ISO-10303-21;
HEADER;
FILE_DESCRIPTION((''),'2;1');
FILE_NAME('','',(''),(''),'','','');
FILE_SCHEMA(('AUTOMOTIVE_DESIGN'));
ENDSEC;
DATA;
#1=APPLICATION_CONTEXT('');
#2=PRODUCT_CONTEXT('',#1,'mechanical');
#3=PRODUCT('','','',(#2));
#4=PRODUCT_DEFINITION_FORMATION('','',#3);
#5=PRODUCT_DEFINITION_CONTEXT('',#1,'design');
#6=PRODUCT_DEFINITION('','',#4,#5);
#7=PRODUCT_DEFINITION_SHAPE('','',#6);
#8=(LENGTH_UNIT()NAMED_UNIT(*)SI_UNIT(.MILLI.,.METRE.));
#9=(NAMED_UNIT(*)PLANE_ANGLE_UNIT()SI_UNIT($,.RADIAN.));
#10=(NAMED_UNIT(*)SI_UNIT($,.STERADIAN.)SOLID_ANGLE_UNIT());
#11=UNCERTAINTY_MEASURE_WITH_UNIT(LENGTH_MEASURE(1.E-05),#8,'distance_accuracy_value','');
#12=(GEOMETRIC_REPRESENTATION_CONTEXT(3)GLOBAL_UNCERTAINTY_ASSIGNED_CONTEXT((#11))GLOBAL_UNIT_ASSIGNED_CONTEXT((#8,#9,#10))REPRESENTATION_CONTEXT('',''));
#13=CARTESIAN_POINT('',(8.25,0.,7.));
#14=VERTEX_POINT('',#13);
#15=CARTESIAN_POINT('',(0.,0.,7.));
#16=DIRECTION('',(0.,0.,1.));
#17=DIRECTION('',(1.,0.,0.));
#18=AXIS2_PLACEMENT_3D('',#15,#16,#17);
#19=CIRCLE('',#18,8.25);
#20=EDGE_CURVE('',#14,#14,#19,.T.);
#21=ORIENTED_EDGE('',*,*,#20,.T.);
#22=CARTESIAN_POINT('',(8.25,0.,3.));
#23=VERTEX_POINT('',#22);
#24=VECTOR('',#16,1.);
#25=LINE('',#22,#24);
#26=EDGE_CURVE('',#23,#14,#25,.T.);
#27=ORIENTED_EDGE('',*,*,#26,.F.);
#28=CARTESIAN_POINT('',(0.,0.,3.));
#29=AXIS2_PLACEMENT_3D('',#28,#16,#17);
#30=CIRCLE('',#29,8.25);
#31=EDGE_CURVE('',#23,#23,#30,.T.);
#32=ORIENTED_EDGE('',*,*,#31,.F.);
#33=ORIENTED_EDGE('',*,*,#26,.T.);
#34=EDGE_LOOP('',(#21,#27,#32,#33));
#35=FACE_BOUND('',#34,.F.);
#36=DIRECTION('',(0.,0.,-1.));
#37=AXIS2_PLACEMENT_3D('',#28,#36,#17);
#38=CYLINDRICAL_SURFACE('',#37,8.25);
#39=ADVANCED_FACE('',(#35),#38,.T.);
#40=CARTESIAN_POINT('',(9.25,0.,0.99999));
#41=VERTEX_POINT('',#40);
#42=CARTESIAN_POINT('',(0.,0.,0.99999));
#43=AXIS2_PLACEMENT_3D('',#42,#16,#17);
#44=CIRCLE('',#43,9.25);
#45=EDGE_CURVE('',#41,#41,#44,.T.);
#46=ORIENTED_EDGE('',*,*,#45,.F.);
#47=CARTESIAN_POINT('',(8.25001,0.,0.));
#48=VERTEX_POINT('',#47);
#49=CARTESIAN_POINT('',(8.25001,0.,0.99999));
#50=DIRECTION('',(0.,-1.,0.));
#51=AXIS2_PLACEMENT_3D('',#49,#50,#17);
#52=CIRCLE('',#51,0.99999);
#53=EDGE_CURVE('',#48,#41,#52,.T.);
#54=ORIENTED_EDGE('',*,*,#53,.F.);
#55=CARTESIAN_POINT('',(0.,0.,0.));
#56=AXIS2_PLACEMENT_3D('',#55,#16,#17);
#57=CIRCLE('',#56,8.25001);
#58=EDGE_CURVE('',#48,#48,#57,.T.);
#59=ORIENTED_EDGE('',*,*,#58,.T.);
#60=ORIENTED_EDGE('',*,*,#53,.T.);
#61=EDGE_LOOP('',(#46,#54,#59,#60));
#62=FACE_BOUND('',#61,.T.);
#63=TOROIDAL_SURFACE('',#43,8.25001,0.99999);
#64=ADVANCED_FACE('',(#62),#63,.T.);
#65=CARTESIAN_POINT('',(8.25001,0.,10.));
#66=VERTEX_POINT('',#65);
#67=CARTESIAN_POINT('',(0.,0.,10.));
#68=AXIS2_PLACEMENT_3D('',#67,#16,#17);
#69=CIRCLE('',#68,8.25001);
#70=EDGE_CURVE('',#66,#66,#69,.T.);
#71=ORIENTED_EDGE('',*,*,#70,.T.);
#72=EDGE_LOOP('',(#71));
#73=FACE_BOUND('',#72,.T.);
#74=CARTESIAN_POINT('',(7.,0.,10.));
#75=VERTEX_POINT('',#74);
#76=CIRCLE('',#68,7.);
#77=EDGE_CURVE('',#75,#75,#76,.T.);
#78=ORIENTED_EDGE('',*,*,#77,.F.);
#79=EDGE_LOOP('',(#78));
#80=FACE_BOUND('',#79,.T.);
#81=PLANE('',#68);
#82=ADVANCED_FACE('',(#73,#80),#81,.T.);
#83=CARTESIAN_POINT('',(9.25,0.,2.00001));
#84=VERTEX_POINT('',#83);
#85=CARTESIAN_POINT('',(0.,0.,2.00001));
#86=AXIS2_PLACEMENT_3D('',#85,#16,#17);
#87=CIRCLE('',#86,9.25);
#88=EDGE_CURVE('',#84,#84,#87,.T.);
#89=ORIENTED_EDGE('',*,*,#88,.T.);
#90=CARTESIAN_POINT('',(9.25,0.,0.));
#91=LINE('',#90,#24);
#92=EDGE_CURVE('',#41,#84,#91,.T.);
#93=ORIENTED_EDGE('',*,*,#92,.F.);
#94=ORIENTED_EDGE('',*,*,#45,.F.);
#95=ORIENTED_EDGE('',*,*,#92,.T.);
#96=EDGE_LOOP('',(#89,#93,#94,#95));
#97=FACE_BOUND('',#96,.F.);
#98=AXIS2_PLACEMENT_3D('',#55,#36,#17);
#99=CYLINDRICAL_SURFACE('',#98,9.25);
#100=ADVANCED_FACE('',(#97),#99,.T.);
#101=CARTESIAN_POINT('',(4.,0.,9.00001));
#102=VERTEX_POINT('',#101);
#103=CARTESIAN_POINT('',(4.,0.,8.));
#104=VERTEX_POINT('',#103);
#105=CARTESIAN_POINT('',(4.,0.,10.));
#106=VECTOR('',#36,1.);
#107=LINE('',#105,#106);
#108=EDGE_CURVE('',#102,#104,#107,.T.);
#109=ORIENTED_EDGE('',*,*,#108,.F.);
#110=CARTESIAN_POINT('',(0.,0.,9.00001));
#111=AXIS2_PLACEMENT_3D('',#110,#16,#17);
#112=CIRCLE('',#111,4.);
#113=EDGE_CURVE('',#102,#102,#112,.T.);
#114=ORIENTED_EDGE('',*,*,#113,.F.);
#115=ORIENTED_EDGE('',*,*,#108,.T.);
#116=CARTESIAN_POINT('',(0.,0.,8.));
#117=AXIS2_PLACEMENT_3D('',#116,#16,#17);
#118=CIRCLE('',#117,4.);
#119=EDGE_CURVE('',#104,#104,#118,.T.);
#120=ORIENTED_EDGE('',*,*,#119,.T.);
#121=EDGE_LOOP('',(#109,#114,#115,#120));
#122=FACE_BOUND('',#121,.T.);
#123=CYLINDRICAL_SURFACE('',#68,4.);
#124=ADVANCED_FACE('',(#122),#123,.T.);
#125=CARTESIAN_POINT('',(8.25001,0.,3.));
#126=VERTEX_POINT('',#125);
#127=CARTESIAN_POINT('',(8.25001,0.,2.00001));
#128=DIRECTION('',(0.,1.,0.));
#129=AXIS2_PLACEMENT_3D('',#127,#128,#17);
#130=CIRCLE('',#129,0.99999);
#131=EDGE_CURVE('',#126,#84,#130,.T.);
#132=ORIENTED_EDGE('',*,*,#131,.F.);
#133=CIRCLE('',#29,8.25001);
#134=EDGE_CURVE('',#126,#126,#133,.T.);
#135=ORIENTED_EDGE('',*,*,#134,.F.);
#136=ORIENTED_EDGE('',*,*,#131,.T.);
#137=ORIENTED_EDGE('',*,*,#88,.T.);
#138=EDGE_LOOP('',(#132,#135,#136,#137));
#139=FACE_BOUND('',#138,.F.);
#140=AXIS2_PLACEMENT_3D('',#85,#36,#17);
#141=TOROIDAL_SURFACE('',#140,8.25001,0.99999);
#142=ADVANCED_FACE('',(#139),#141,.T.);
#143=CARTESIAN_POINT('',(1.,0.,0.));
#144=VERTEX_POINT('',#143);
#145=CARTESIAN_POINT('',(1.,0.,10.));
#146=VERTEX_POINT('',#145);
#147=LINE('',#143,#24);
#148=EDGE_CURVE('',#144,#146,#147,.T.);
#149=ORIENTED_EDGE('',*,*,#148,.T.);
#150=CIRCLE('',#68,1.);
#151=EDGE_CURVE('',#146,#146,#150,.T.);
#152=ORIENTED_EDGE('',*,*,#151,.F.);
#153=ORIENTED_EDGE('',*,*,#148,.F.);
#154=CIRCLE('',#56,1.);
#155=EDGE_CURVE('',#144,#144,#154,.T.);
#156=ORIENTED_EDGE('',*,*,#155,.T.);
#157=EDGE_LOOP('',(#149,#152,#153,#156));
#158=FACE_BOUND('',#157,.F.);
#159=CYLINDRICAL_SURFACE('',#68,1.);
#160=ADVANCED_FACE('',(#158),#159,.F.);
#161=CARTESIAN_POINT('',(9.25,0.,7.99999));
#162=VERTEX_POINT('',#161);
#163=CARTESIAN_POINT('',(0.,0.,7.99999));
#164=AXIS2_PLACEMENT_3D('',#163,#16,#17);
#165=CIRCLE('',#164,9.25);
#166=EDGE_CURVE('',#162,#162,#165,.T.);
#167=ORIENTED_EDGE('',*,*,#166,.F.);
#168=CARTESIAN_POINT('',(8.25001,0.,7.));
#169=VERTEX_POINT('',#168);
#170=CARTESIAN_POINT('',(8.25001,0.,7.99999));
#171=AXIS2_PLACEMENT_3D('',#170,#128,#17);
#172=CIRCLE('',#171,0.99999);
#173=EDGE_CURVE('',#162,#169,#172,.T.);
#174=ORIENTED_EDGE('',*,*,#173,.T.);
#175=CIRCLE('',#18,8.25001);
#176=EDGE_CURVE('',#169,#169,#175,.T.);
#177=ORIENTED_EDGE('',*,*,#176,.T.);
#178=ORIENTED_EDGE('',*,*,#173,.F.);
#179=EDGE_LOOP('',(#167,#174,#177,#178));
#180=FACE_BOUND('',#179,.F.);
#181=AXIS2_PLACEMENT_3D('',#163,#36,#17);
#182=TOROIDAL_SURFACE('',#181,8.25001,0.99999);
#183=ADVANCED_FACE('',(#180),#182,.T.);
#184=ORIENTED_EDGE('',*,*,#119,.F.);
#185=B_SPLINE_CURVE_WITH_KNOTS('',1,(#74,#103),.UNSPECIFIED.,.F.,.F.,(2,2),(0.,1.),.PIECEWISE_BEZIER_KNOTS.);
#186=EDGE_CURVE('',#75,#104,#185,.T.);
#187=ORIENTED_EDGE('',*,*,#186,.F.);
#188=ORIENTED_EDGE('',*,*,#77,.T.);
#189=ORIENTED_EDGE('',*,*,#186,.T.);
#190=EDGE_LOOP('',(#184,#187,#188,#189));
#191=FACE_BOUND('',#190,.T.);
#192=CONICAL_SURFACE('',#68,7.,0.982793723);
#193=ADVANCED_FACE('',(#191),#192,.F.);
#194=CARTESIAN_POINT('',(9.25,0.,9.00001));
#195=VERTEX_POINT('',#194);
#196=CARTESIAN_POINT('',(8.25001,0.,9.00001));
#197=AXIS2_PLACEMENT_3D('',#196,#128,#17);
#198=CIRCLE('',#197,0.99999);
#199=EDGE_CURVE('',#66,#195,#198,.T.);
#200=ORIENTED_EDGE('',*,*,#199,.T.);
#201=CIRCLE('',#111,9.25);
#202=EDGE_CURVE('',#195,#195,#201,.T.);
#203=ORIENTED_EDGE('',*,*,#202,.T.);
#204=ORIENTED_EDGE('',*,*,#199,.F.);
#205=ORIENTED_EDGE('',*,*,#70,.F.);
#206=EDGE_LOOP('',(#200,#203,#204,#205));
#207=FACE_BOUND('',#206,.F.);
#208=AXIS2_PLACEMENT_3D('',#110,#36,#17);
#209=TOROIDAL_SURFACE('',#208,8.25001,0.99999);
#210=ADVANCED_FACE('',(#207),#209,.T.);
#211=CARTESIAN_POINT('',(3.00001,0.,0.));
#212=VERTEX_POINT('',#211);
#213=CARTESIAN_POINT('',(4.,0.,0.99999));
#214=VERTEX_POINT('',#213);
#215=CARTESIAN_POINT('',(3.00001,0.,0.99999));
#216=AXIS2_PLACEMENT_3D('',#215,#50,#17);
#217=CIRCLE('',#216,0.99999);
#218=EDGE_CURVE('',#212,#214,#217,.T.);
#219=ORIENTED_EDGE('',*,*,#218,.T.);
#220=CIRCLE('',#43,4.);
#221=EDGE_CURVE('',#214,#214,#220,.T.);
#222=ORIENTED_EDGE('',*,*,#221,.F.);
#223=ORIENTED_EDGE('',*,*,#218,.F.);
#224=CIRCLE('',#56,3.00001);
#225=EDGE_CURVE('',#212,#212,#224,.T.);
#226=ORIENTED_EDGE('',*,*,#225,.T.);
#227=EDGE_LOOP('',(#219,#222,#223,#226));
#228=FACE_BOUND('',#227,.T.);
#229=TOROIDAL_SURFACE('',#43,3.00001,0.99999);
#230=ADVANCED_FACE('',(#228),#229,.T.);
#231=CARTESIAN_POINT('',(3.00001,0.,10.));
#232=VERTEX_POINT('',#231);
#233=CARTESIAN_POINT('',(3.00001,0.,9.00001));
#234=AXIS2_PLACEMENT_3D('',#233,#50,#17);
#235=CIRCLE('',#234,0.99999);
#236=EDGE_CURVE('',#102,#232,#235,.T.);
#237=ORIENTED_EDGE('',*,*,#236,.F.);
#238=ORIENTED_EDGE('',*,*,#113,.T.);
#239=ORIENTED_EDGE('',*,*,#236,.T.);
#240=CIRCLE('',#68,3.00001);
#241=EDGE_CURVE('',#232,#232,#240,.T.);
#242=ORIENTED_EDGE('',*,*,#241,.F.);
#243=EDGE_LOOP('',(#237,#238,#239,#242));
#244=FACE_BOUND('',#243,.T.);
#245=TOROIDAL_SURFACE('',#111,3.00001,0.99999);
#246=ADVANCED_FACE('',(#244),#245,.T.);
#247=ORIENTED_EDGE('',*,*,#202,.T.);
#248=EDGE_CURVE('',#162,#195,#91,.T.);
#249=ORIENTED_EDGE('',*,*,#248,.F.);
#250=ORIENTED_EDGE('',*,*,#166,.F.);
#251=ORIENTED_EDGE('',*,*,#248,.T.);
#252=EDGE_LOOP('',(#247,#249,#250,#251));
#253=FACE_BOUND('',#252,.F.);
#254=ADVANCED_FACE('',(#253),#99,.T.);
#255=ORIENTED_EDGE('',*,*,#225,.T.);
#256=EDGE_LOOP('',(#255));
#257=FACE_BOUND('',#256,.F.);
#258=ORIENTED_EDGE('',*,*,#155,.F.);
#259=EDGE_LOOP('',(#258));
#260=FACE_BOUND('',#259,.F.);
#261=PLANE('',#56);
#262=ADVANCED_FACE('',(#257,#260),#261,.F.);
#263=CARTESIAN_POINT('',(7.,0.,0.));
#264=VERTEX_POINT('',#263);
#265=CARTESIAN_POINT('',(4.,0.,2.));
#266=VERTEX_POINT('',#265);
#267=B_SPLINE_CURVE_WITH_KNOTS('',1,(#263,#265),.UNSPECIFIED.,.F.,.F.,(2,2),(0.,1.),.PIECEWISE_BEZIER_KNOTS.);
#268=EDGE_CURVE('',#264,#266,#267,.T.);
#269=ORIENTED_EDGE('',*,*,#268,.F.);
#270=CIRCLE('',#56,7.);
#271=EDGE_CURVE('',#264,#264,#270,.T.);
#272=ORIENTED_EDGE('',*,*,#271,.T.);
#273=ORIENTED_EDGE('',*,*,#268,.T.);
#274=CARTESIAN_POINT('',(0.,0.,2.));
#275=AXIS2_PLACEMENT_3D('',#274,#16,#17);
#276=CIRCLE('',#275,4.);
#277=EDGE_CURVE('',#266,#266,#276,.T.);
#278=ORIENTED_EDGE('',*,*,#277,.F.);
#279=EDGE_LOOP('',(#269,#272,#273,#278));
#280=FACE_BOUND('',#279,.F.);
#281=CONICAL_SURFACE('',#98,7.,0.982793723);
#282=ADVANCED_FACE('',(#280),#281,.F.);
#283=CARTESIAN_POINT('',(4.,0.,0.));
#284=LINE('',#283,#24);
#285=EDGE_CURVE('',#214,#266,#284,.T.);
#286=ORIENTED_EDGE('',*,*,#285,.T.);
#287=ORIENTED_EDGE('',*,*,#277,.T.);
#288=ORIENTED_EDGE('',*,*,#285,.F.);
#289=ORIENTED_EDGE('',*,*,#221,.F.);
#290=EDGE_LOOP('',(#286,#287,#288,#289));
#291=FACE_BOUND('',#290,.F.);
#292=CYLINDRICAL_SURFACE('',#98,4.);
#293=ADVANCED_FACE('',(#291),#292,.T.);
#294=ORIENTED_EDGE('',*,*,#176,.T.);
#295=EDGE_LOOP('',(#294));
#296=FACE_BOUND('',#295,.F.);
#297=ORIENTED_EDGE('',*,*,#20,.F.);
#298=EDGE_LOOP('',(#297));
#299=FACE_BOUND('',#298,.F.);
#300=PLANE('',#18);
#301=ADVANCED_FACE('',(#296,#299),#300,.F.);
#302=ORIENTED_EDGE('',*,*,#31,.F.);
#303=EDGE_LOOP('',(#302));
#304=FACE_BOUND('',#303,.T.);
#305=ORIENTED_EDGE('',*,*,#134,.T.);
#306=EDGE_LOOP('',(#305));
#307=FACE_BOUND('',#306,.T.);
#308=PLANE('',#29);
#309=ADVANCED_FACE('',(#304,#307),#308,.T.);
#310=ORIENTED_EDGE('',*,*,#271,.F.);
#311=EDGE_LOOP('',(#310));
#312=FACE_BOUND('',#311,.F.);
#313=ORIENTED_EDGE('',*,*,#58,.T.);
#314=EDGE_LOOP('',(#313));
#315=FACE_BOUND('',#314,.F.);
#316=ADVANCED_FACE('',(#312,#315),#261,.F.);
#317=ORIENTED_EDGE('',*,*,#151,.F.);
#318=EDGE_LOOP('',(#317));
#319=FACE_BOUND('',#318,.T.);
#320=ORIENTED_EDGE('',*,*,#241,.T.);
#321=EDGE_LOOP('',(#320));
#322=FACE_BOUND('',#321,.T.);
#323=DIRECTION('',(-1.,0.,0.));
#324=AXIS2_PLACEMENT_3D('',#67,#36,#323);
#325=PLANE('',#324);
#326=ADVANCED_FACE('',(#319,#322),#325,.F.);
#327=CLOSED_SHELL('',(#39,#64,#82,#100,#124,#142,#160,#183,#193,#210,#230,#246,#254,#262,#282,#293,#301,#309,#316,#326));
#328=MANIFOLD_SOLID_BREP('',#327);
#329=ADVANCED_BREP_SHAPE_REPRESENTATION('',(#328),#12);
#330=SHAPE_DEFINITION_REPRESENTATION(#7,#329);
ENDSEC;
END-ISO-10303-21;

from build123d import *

# Parameters (mm, degrees)
F0_R      = 9.25
F0_R_2    = 1
F1_DEPTH  = 10
F4_R      = 7
F3_R      = 4
F8_R      = 7
F7_R      = 4
F11_R     = 4
F11_R_2   = 1
F12_DEPTH = 2
F14_R     = 9.25
F14_R_2   = 8.25
F15_DEPTH = 4
F16_R     = 0.99999


# Not quite as in the source:
# - a fillet or chamfer is up to 0.001 mm smaller than in the source, because OpenCascade refuses the exact size
# - a feature of the source that left no trace in its solid (it failed there, or was rolled back) is left out
# - a pattern or mirror of a feature is missing from the dataset's text; its kind, count and spacing are read off the source's solid


with BuildPart() as f1:
    # F0 (on Top) → F1 (new body)
    with BuildSketch(Plane.XY):
        Circle(F0_R)
        Circle(F0_R_2, mode=Mode.SUBTRACT)
    extrude(amount=F1_DEPTH)

    # F4 (on face) → F5 section 0
    with BuildSketch(Plane.XY.offset(10)):
        Circle(F4_R)
    # F3 (on offset) → F5 section 1
    with BuildSketch(Plane.XY.offset(8)):
        Circle(F3_R)
    loft(mode=Mode.SUBTRACT)

    # F8 (on face) → F9 section 0
    with BuildSketch(Plane.XY):
        Circle(F8_R)
    # F7 (on offset) → F9 section 1
    with BuildSketch(Plane.XY.offset(2)):
        Circle(F7_R)
    loft(mode=Mode.SUBTRACT)

    # F11 (on face) → F12 (join, through all)
    with BuildSketch(Plane.XY):
        Circle(F11_R)
        Circle(F11_R_2, mode=Mode.SUBTRACT)
    f12 = extrude(amount=F12_DEPTH)

    # F12_copies: F12 across plane
    add(f12.mirror(Plane.XY.offset(5)))

    # F14 (on offset) → F15 (cut)
    with BuildSketch(Plane.XY.offset(3)):
        Circle(F14_R)
        Circle(F14_R_2, mode=Mode.SUBTRACT)
    extrude(amount=F15_DEPTH, mode=Mode.SUBTRACT)

    # F16 (radius 1 in the source; OpenCascade refuses exactly that, so slightly less here)
    f16_edges = [f1.edges().sort_by_distance(p)[0] for p in [
        (-4, 0, 0),
        (-9.25, 0, 10),
        (-9.25, 0, 0),
        (-9.25, 0, 7),
        (-9.25, 0, 3),
        (-4, 0, 10),
    ]]
    fillet(f16_edges, radius=F16_R)


solid = f1.part
